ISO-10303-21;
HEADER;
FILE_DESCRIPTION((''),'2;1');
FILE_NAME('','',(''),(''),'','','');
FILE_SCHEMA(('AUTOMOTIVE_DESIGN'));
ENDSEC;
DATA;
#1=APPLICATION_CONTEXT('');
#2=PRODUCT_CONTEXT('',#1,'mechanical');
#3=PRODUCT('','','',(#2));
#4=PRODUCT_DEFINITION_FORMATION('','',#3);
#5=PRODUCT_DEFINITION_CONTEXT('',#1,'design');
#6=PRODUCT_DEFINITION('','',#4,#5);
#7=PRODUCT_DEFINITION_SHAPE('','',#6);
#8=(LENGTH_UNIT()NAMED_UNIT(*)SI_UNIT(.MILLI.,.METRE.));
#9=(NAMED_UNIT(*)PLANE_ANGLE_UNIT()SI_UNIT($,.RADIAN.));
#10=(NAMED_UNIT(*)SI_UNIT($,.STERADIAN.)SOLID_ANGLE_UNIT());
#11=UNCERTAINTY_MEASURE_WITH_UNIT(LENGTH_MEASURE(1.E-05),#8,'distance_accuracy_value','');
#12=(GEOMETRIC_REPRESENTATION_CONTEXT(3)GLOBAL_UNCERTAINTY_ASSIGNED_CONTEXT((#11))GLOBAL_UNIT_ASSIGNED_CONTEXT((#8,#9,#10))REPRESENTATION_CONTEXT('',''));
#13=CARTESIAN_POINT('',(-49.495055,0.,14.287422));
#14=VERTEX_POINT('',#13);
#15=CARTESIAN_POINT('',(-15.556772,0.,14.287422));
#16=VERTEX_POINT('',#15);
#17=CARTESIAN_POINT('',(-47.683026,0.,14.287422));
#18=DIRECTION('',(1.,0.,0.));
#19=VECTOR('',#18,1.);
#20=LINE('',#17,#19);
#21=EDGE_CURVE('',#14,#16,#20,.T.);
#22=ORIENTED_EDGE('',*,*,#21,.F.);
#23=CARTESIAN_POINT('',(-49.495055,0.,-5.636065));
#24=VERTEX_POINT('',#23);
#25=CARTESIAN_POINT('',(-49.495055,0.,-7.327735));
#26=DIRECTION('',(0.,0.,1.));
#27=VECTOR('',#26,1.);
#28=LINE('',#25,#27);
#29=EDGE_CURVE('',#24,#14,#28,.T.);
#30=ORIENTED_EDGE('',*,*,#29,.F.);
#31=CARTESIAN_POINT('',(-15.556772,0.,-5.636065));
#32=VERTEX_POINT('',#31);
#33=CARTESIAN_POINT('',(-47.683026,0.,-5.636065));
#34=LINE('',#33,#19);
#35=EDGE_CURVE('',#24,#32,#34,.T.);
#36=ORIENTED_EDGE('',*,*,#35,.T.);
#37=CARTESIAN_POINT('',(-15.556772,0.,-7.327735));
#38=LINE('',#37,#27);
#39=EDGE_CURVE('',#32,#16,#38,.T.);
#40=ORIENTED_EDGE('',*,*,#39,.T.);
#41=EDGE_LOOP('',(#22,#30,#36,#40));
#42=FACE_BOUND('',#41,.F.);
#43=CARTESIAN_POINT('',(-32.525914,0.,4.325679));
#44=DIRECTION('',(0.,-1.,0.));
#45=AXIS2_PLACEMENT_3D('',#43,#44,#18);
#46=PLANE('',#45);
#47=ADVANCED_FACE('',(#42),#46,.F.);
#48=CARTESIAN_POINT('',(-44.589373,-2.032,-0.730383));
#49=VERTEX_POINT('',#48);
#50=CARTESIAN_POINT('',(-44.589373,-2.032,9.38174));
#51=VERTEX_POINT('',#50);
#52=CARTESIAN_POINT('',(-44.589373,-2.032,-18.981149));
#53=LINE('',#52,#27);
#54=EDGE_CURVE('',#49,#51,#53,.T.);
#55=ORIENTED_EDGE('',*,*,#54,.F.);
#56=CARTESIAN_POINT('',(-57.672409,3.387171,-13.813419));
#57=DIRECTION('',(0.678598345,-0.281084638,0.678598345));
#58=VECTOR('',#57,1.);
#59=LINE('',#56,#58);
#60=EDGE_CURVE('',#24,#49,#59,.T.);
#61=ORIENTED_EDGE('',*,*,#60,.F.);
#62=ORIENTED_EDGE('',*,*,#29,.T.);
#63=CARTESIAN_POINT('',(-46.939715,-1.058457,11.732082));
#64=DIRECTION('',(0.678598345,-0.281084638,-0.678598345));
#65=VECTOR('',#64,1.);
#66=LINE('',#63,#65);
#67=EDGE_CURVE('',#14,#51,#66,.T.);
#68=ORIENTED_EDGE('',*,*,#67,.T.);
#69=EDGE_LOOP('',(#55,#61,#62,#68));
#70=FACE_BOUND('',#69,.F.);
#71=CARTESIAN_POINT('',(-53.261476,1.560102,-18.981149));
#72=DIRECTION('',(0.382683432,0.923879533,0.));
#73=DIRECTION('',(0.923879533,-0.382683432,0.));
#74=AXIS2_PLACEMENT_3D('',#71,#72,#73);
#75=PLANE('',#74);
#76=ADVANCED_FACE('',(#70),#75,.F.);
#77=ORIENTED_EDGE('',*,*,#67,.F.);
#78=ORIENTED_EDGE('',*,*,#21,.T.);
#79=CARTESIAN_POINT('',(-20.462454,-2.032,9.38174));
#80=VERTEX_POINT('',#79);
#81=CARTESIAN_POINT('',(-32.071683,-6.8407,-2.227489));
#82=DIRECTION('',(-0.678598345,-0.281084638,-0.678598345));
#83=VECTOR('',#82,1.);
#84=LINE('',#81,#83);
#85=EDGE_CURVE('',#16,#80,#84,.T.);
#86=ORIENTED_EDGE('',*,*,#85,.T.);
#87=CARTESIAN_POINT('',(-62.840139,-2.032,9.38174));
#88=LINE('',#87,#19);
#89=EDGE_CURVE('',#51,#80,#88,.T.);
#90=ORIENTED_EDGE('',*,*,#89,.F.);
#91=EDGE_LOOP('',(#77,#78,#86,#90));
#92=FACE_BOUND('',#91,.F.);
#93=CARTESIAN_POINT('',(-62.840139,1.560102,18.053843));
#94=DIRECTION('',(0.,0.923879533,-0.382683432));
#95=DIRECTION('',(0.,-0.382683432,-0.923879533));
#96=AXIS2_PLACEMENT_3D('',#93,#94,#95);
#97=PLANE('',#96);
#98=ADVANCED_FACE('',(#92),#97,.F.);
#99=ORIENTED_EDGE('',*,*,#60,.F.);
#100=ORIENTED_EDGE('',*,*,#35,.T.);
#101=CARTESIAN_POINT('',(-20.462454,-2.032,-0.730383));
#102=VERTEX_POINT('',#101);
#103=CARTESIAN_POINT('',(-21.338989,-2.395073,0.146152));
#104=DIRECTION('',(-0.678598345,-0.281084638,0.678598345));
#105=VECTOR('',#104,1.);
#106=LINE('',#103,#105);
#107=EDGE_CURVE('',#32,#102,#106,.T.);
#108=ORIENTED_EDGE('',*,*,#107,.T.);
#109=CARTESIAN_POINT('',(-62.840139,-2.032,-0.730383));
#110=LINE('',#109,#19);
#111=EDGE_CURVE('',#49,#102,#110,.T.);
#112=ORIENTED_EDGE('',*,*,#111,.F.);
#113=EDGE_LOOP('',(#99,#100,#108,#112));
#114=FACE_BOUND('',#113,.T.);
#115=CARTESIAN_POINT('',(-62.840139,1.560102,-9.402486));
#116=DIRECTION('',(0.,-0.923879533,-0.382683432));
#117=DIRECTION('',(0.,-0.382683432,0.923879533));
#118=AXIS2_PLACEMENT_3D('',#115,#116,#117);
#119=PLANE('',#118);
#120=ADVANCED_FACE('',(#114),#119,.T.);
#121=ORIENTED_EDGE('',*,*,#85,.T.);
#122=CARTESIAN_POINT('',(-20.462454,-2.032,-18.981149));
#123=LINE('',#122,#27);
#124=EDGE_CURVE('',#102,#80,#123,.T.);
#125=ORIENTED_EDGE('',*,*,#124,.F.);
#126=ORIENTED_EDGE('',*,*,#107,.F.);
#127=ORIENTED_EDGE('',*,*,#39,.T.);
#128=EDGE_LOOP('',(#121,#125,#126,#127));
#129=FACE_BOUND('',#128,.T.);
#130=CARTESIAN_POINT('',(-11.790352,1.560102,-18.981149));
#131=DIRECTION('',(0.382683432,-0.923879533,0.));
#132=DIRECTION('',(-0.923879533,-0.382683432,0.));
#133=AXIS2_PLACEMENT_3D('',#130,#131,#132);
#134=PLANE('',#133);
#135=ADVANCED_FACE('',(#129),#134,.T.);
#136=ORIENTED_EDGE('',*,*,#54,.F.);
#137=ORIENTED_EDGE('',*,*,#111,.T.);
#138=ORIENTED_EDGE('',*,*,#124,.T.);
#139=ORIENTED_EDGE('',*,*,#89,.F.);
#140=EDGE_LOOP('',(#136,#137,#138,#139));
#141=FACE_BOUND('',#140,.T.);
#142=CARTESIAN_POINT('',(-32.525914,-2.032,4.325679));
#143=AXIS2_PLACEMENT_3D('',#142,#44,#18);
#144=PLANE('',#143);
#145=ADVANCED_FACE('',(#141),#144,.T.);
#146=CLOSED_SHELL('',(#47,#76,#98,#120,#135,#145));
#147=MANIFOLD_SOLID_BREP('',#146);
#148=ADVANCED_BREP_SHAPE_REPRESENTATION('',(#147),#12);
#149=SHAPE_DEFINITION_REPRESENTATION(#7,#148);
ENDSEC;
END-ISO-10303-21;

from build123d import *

# Parameters (mm, degrees)
F0_W        = 44.4469191134
F0_H        = 30.4321236908
F1_DEPTH    = 2.032
F2_T1_DEPTH = 70.5752182711
F2_T3_DEPTH = 56.5604228486
F3_T1_DEPTH = 60.6284503053
F3_T3_DEPTH = 46.6136548828


# Not quite as in the source:
# - a fillet or chamfer that OpenCascade refuses, or shapes differently, is made with other operations: its cross-section is extruded or revolved along the edge and cut away or added
# - a feature of the source that left no trace in its solid (it failed there, or was rolled back) is left out


with BuildPart() as f1:
    # F0 (on Front) → F1 (new body)
    with BuildSketch(Plane.XZ):
        with Locations((-32.5259137899, 4.3256785721)):
            Rectangle(F0_W, F0_H)
    extrude(amount=F1_DEPTH)

    # F2: chamfer of 5.08 on 4 edges, made by hand

    # F2_s2 → F2_t1 (cut)
    with BuildSketch(Plane.YZ.offset(-67.8135229254)):
        Polygon((3.048, 19.5417404175), (-2.032, 14.4617404175), (-2.032, 19.5417404175), align=None)
        Polygon((3.048, -10.8903832734), (-2.032, -5.8103832734), (-2.032, -10.8903832734), align=None)
    extrude(amount=F2_T1_DEPTH, mode=Mode.SUBTRACT)

    # F2_s4 → F2_t3 (cut)
    with BuildSketch(Plane.XY.offset(-23.9545328522)):
        Polygon((-54.7493733466, 3.048), (-49.6693733466, -2.032), (-54.7493733466, -2.032), align=None)
        Polygon((-10.3024542332, 3.048), (-15.3824542332, -2.032), (-10.3024542332, -2.032), align=None)
    extrude(amount=F2_T3_DEPTH, mode=Mode.SUBTRACT)

    # F3: chamfer of 5.08 on 4 edges, made by hand

    # F3_s2 → F3_t1 (cut)
    with BuildSketch(Plane.YZ.offset(-62.8401389426)):
        Polygon((1.5601024484, -9.4024857218), (-2.032, -0.7303832734), (-2.032, -5.8103832734), align=None)
        Polygon((1.5601024484, 18.0538428659), (-2.032, 9.3817404175), (-2.032, 14.4617404175), align=None)
    extrude(amount=F3_T1_DEPTH, mode=Mode.SUBTRACT)

    # F3_s4 → F3_t3 (cut)
    with BuildSketch(Plane.XY.offset(-18.9811488694)):
        Polygon((-53.261475795, 1.5601024484), (-44.5893733466, -2.032), (-49.6693733466, -2.032), align=None)
        Polygon((-11.7903517848, 1.5601024484), (-20.4624542332, -2.032), (-15.3824542332, -2.032), align=None)
    extrude(amount=F3_T3_DEPTH, mode=Mode.SUBTRACT)


solid = f1.part
